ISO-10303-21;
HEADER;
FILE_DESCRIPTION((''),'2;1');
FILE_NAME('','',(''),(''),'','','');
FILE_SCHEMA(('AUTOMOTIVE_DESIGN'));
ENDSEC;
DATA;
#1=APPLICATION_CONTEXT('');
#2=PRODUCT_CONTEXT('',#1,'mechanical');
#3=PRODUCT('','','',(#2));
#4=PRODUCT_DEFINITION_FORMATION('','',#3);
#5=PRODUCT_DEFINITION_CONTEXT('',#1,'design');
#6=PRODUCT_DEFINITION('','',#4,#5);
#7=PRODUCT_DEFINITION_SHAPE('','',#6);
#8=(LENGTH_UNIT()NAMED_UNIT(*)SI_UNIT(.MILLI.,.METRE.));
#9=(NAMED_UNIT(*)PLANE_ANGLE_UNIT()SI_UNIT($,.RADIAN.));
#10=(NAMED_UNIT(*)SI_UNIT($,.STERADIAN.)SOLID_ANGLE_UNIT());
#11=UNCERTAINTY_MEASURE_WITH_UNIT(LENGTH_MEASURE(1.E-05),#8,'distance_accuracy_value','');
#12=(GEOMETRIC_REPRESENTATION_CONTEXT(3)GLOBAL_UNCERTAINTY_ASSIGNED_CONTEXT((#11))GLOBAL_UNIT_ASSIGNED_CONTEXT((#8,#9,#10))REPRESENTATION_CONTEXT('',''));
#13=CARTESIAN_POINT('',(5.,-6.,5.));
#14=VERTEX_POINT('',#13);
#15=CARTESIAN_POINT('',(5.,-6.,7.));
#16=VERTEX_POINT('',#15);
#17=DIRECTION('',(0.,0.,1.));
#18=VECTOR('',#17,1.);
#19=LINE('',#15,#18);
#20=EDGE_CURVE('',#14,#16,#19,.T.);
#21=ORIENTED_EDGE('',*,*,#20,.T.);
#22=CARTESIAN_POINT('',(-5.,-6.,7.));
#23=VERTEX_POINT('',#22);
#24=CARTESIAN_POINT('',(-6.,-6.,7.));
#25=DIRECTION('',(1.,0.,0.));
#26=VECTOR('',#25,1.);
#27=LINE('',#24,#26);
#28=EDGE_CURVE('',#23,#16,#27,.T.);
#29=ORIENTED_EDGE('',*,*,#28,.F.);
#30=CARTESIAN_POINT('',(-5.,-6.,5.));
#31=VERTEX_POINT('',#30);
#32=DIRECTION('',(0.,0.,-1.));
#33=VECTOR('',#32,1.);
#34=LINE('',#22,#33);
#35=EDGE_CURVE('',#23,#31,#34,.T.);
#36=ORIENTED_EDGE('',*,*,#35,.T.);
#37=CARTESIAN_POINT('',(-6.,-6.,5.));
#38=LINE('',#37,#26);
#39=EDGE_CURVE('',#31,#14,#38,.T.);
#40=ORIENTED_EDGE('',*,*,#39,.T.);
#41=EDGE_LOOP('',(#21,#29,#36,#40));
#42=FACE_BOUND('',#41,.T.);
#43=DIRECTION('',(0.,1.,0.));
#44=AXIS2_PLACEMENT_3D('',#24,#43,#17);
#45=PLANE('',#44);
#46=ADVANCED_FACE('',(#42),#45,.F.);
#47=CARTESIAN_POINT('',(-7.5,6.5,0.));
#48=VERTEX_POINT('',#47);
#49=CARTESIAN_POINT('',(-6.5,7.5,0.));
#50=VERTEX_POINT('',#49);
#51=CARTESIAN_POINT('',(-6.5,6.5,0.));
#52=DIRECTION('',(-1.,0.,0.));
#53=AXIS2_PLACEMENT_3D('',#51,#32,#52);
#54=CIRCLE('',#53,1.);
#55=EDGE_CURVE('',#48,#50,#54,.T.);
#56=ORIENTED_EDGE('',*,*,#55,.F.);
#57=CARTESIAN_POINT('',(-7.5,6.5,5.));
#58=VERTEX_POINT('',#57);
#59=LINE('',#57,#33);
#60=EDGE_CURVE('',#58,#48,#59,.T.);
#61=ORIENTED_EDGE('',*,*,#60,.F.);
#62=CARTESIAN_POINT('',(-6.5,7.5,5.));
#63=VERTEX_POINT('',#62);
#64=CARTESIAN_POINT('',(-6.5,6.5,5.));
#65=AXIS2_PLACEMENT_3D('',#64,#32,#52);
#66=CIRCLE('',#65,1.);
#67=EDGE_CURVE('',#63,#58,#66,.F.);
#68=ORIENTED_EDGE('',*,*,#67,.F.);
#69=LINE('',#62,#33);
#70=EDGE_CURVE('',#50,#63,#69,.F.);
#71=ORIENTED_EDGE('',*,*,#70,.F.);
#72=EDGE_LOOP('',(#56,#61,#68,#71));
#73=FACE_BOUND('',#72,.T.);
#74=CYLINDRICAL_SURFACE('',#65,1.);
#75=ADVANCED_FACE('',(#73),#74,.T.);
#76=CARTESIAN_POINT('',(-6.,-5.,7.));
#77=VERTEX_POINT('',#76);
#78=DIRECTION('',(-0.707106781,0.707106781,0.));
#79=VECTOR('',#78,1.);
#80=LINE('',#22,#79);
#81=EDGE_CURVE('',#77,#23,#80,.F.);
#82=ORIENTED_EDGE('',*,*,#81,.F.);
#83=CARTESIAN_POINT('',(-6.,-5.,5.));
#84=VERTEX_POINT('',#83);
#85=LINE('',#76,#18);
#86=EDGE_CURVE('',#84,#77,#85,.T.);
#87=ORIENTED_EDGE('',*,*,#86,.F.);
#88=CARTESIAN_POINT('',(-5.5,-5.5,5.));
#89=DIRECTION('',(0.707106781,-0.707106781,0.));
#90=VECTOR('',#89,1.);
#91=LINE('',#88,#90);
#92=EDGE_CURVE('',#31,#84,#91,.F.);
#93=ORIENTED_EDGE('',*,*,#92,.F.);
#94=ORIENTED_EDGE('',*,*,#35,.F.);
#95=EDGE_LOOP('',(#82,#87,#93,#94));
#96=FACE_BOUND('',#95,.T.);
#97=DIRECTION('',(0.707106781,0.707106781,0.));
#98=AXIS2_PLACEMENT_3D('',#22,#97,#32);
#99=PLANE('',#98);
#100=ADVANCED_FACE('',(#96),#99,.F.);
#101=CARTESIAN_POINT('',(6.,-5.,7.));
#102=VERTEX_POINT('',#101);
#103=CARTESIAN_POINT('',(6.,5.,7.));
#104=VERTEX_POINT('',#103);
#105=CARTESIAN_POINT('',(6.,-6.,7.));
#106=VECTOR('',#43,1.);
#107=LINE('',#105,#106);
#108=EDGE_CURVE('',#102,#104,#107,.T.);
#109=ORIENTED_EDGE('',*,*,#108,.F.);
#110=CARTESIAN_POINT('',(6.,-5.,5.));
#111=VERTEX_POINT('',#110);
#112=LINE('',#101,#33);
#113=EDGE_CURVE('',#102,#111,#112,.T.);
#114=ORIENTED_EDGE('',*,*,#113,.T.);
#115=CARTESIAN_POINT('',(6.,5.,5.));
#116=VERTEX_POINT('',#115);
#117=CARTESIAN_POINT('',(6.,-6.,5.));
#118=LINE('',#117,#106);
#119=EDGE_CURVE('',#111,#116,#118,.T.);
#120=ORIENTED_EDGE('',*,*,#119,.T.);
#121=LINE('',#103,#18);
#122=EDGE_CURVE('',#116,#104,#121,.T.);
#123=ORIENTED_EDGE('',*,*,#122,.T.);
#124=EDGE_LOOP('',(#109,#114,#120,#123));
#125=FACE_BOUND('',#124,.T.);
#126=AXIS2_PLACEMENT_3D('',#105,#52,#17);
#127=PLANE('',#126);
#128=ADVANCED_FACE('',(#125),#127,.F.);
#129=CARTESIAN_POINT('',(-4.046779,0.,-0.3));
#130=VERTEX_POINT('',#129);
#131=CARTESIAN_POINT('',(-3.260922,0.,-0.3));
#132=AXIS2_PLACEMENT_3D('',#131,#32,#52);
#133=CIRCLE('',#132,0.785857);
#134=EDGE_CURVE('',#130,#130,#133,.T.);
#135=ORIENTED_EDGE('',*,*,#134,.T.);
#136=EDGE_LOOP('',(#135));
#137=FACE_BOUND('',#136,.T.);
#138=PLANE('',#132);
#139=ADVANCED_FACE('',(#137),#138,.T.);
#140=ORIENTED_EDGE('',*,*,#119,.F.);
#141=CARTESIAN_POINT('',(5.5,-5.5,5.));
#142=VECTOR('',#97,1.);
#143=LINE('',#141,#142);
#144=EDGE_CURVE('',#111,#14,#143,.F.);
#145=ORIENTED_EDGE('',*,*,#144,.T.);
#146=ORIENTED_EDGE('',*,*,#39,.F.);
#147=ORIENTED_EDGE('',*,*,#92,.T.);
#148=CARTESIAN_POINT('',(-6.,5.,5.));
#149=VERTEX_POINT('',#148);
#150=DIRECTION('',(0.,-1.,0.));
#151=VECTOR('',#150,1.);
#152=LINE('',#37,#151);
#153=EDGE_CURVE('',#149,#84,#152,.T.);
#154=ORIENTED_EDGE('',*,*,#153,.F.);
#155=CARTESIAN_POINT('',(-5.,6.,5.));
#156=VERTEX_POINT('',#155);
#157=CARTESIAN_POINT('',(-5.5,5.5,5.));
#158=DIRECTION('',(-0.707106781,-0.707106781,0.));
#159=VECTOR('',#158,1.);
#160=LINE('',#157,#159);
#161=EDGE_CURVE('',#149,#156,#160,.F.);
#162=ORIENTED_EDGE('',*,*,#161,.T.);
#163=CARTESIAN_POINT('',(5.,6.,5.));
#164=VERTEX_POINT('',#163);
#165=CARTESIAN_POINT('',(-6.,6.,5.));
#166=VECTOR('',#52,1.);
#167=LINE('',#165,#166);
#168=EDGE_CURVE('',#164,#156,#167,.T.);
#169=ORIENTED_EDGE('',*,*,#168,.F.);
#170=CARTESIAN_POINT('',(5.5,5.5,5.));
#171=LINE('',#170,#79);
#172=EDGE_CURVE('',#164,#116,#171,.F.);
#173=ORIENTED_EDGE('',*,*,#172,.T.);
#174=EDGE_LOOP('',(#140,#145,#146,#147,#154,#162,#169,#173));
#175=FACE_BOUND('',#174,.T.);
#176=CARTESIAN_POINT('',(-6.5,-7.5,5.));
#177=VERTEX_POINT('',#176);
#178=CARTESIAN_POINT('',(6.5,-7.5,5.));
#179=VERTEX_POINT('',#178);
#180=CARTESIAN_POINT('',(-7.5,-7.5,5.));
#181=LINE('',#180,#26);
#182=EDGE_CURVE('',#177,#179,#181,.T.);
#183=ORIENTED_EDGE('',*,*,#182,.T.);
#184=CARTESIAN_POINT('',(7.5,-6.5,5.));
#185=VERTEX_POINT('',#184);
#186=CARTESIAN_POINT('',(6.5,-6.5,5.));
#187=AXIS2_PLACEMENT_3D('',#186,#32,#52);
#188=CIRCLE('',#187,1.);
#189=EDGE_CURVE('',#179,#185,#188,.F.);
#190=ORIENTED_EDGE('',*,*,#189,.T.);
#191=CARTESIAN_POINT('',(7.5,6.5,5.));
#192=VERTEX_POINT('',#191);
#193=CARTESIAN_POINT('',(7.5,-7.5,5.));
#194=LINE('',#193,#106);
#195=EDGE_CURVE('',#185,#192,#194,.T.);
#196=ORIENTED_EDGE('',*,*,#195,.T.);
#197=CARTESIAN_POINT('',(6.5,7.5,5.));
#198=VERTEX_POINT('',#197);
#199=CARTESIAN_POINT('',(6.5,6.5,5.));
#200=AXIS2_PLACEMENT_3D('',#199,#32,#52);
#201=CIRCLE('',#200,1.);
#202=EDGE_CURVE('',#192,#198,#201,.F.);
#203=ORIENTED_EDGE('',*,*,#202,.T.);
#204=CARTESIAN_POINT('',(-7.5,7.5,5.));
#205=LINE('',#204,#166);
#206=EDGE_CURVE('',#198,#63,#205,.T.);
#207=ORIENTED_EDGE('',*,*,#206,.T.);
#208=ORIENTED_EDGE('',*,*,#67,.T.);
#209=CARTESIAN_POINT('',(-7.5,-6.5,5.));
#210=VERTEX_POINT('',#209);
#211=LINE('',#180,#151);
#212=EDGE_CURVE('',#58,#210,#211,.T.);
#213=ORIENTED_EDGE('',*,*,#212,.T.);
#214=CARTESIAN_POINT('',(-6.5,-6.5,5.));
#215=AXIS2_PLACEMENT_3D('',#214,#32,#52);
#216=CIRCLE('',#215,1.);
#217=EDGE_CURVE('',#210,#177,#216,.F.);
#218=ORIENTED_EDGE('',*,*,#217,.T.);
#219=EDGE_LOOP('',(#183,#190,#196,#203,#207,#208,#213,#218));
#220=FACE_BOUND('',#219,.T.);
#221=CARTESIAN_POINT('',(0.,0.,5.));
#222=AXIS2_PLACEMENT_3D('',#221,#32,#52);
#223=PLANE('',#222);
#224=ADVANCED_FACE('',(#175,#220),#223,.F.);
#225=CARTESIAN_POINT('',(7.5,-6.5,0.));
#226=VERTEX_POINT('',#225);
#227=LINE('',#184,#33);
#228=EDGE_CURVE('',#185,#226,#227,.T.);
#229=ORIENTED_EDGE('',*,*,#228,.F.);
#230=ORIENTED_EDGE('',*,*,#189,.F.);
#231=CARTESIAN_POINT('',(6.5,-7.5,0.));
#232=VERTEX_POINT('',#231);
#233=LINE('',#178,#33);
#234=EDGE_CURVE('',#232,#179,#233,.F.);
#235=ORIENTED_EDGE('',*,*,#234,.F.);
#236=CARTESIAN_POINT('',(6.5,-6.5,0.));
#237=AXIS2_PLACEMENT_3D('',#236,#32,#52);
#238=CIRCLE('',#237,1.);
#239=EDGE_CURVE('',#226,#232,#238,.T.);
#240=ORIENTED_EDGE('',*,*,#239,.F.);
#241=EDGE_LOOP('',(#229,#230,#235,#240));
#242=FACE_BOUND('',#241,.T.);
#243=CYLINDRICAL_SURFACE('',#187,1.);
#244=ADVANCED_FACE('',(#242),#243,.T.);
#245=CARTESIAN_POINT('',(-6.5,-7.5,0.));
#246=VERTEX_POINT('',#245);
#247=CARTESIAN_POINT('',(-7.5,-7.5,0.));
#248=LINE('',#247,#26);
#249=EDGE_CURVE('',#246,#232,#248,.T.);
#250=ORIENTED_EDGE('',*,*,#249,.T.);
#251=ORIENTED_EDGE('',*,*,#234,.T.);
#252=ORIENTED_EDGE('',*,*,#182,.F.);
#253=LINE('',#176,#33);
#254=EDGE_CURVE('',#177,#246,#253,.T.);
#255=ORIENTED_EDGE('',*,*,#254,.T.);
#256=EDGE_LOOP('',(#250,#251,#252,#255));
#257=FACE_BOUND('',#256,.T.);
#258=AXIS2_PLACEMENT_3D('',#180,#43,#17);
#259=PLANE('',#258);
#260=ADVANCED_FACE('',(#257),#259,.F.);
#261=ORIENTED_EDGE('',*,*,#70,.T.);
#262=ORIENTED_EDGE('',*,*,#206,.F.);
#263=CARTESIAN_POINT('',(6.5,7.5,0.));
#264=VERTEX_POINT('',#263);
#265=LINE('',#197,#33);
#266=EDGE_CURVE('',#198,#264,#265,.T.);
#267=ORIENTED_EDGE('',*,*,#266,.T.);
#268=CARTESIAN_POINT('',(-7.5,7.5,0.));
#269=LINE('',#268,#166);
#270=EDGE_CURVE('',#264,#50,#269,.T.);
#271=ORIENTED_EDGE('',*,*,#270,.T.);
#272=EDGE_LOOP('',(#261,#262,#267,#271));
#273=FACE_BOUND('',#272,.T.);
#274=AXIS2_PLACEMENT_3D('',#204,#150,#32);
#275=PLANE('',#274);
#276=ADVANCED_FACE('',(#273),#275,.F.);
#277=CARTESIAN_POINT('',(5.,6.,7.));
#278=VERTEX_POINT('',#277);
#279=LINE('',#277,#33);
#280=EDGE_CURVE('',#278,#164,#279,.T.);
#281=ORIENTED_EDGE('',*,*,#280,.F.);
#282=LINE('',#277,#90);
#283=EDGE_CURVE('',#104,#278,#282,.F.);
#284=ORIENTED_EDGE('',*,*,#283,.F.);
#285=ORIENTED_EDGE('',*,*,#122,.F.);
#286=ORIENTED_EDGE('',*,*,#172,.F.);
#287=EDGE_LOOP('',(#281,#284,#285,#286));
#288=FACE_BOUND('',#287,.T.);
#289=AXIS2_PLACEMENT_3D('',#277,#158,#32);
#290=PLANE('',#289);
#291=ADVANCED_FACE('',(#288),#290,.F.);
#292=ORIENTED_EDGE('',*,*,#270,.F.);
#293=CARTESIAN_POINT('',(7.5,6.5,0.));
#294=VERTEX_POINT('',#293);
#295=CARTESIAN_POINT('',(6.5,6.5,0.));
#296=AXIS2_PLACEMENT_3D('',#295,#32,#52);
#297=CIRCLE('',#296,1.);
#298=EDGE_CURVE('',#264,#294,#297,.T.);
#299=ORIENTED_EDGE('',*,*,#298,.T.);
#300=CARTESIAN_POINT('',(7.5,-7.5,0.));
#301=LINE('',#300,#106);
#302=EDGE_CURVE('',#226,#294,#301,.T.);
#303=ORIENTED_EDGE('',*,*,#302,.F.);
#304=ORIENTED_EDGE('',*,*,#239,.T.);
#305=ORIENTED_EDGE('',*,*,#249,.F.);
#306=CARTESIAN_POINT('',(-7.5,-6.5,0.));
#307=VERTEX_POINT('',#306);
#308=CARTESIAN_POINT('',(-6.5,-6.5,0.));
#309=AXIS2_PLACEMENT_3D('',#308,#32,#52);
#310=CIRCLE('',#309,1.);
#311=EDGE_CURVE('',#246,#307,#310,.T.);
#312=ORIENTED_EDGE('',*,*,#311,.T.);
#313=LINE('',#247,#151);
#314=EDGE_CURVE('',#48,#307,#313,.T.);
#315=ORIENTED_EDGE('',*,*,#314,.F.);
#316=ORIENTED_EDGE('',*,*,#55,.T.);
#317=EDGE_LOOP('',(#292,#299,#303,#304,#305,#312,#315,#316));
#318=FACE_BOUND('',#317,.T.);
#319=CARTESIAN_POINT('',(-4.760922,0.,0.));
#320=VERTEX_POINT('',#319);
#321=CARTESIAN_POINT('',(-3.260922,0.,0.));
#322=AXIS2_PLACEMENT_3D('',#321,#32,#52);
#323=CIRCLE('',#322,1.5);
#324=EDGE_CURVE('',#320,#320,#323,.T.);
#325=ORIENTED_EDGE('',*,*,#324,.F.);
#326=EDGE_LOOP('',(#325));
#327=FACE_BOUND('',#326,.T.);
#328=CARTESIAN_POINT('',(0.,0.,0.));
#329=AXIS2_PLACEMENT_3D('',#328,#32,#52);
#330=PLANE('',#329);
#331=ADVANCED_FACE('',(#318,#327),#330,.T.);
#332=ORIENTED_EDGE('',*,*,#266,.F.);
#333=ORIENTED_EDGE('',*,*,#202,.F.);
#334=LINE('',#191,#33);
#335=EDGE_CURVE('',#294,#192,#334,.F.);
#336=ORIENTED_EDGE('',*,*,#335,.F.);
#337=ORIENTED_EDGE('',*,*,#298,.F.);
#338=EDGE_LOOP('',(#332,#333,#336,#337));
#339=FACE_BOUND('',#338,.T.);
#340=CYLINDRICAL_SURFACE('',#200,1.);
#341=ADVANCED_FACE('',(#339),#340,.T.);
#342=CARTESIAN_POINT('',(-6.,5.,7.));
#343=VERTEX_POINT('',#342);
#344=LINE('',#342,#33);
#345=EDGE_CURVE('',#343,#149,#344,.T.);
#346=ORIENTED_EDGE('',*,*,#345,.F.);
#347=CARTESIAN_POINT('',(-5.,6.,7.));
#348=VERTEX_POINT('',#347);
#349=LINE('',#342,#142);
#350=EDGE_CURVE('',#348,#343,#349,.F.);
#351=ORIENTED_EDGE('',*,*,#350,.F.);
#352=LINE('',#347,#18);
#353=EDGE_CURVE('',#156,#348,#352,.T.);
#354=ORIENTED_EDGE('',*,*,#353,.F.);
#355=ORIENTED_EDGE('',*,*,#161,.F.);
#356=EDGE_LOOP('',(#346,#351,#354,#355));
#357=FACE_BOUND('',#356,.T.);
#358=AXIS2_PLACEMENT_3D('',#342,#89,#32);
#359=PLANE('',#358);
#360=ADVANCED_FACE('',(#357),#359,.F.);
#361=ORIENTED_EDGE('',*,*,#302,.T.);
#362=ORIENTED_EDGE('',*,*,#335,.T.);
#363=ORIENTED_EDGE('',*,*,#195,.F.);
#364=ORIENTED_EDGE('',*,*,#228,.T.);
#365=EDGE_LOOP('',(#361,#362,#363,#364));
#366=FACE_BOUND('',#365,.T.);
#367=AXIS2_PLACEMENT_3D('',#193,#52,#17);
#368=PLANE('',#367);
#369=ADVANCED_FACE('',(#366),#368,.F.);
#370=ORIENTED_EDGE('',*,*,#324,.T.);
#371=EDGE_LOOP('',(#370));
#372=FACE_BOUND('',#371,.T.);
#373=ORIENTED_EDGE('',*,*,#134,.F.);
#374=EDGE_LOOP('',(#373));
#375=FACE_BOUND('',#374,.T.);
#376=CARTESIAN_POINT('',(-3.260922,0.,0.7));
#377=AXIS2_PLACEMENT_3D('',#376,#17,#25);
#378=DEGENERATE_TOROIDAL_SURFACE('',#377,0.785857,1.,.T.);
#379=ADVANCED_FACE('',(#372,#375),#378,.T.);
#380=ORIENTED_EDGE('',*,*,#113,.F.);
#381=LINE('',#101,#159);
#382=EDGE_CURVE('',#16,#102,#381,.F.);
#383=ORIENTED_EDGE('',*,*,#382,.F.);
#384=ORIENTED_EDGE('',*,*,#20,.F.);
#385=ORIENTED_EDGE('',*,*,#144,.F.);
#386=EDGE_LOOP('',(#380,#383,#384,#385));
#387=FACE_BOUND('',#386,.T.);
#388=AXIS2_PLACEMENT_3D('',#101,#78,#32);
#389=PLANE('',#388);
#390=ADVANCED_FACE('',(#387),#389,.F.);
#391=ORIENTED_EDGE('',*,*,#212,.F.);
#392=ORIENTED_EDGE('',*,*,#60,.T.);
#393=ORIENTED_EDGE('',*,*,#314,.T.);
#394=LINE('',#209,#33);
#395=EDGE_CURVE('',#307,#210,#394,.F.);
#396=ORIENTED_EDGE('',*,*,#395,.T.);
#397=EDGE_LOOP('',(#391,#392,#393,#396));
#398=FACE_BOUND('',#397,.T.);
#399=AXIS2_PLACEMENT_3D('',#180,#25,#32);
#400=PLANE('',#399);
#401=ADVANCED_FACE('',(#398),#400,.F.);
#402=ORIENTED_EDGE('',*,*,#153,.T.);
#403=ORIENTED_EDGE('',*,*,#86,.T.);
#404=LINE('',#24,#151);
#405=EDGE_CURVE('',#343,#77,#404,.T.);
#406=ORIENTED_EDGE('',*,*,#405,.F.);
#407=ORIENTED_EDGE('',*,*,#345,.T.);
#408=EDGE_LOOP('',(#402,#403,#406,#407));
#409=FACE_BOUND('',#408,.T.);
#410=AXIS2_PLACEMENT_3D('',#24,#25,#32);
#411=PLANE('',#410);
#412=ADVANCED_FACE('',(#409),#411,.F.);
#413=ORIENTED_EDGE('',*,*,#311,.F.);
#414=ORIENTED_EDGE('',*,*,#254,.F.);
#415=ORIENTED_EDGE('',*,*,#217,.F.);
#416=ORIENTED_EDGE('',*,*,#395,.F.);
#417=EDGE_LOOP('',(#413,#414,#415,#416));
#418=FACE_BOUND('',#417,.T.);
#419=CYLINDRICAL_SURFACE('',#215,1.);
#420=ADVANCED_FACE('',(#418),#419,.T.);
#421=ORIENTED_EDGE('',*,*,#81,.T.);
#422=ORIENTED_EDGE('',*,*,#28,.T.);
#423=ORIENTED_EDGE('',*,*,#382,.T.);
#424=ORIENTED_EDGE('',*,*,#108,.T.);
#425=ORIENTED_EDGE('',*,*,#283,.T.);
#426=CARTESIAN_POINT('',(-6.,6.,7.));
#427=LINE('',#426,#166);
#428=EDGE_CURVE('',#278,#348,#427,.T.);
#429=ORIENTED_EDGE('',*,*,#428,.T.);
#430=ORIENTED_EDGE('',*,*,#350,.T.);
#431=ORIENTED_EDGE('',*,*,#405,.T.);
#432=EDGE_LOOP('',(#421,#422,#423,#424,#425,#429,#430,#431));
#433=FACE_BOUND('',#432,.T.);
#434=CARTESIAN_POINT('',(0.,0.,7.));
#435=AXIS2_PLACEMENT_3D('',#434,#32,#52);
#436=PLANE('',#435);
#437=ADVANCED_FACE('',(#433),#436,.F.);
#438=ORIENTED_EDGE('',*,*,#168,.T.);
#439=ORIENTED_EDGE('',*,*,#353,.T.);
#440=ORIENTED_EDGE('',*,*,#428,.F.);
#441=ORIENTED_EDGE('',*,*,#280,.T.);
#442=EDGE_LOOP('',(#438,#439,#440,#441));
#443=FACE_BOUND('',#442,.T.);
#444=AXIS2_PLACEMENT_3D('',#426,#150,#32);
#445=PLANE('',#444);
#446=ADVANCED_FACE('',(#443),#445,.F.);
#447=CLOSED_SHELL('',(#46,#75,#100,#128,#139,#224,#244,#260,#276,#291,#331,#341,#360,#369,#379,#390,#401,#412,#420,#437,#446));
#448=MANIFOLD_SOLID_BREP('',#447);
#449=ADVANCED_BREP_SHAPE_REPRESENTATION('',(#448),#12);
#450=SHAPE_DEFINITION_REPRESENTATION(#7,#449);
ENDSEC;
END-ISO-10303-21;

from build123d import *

# Parameters (mm, degrees)
ESQUISSE1_W        = 15
ESQUISSE1_H        = 15
BOSS_EXTRU_1_DEPTH = 5
CONG_1_R           = 1
ESQUISSE2_R        = 1.5
BOSS_EXTRU_2_DEPTH = 0.3
CONG_2_R           = 1
ESQUISSE4_W        = 12
ESQUISSE4_H        = 12
BOSS_EXTRU_4_DEPTH = 2
CHANFREIN1_SIZE    = 1


with BuildPart() as part:
    # Esquisse1 → Boss.-Extru.1 (new body)
    with BuildSketch(Plane.XY):
        Rectangle(ESQUISSE1_W, ESQUISSE1_H)
    extrude(amount=BOSS_EXTRU_1_DEPTH)

    # Congé1
    cong_1_edges = [part.edges().sort_by_distance(p)[0] for p in [
        (7.5, -7.5, 2.5),
        (-7.5, -7.5, 2.5),
        (-7.5, 7.5, 2.5),
        (7.5, 7.5, 2.5),
    ]]
    fillet(cong_1_edges, radius=CONG_1_R)

    # Esquisse2 → Boss.-Extru.2 (add)
    with BuildSketch(Plane(origin=(0, 0, 0), x_dir=(-1, 0, 0), z_dir=(0, 0, -1))):
        with Locations((3.260921735, 0)):
            Circle(ESQUISSE2_R)
    extrude(amount=BOSS_EXTRU_2_DEPTH)

    # Congé2
    # the kernel refuses this fillet: 1 mm, written as the material it takes off along each edge
    with BuildSketch(Plane(origin=(-3.260921735, 0, -0.3), x_dir=(-1, 0, 0), z_dir=(0, -1, 0))) as cong_2_piece_1:
        with BuildLine():
            CenterArc((0.785857157, -1), CONG_2_R, 44.427004001, 45.572995999)
            Line((0.785857157, 0), (0.785857157, 0.02))
            Line((0.785857157, 0.02), (1.5, 0.02))
            Line((1.5, 0.02), (1.52, 0))
            ThreePointArc((1.52, 0), (1.52, -0.15), (1.514282857, -0.286))
            Line((1.514282857, -0.286), (1.5, -0.3))
        make_face()
    revolve(axis=Axis((-3.260921735, 0, -0.3), (0, 0, -1)), mode=Mode.SUBTRACT)

    # Esquisse4 → Boss.-Extru.4 (add)
    with BuildSketch(Plane.XY.offset(5)):
        Rectangle(ESQUISSE4_W, ESQUISSE4_H)
    extrude(amount=BOSS_EXTRU_4_DEPTH)

    # Chanfrein1
    chanfrein1_edges = [part.edges().sort_by_distance(p)[0] for p in [
        (6, -6, 6),
        (6, 6, 6),
        (-6, 6, 6),
        (-6, -6, 6),
    ]]
    chamfer(chanfrein1_edges, length=CHANFREIN1_SIZE)


solid = part.part
